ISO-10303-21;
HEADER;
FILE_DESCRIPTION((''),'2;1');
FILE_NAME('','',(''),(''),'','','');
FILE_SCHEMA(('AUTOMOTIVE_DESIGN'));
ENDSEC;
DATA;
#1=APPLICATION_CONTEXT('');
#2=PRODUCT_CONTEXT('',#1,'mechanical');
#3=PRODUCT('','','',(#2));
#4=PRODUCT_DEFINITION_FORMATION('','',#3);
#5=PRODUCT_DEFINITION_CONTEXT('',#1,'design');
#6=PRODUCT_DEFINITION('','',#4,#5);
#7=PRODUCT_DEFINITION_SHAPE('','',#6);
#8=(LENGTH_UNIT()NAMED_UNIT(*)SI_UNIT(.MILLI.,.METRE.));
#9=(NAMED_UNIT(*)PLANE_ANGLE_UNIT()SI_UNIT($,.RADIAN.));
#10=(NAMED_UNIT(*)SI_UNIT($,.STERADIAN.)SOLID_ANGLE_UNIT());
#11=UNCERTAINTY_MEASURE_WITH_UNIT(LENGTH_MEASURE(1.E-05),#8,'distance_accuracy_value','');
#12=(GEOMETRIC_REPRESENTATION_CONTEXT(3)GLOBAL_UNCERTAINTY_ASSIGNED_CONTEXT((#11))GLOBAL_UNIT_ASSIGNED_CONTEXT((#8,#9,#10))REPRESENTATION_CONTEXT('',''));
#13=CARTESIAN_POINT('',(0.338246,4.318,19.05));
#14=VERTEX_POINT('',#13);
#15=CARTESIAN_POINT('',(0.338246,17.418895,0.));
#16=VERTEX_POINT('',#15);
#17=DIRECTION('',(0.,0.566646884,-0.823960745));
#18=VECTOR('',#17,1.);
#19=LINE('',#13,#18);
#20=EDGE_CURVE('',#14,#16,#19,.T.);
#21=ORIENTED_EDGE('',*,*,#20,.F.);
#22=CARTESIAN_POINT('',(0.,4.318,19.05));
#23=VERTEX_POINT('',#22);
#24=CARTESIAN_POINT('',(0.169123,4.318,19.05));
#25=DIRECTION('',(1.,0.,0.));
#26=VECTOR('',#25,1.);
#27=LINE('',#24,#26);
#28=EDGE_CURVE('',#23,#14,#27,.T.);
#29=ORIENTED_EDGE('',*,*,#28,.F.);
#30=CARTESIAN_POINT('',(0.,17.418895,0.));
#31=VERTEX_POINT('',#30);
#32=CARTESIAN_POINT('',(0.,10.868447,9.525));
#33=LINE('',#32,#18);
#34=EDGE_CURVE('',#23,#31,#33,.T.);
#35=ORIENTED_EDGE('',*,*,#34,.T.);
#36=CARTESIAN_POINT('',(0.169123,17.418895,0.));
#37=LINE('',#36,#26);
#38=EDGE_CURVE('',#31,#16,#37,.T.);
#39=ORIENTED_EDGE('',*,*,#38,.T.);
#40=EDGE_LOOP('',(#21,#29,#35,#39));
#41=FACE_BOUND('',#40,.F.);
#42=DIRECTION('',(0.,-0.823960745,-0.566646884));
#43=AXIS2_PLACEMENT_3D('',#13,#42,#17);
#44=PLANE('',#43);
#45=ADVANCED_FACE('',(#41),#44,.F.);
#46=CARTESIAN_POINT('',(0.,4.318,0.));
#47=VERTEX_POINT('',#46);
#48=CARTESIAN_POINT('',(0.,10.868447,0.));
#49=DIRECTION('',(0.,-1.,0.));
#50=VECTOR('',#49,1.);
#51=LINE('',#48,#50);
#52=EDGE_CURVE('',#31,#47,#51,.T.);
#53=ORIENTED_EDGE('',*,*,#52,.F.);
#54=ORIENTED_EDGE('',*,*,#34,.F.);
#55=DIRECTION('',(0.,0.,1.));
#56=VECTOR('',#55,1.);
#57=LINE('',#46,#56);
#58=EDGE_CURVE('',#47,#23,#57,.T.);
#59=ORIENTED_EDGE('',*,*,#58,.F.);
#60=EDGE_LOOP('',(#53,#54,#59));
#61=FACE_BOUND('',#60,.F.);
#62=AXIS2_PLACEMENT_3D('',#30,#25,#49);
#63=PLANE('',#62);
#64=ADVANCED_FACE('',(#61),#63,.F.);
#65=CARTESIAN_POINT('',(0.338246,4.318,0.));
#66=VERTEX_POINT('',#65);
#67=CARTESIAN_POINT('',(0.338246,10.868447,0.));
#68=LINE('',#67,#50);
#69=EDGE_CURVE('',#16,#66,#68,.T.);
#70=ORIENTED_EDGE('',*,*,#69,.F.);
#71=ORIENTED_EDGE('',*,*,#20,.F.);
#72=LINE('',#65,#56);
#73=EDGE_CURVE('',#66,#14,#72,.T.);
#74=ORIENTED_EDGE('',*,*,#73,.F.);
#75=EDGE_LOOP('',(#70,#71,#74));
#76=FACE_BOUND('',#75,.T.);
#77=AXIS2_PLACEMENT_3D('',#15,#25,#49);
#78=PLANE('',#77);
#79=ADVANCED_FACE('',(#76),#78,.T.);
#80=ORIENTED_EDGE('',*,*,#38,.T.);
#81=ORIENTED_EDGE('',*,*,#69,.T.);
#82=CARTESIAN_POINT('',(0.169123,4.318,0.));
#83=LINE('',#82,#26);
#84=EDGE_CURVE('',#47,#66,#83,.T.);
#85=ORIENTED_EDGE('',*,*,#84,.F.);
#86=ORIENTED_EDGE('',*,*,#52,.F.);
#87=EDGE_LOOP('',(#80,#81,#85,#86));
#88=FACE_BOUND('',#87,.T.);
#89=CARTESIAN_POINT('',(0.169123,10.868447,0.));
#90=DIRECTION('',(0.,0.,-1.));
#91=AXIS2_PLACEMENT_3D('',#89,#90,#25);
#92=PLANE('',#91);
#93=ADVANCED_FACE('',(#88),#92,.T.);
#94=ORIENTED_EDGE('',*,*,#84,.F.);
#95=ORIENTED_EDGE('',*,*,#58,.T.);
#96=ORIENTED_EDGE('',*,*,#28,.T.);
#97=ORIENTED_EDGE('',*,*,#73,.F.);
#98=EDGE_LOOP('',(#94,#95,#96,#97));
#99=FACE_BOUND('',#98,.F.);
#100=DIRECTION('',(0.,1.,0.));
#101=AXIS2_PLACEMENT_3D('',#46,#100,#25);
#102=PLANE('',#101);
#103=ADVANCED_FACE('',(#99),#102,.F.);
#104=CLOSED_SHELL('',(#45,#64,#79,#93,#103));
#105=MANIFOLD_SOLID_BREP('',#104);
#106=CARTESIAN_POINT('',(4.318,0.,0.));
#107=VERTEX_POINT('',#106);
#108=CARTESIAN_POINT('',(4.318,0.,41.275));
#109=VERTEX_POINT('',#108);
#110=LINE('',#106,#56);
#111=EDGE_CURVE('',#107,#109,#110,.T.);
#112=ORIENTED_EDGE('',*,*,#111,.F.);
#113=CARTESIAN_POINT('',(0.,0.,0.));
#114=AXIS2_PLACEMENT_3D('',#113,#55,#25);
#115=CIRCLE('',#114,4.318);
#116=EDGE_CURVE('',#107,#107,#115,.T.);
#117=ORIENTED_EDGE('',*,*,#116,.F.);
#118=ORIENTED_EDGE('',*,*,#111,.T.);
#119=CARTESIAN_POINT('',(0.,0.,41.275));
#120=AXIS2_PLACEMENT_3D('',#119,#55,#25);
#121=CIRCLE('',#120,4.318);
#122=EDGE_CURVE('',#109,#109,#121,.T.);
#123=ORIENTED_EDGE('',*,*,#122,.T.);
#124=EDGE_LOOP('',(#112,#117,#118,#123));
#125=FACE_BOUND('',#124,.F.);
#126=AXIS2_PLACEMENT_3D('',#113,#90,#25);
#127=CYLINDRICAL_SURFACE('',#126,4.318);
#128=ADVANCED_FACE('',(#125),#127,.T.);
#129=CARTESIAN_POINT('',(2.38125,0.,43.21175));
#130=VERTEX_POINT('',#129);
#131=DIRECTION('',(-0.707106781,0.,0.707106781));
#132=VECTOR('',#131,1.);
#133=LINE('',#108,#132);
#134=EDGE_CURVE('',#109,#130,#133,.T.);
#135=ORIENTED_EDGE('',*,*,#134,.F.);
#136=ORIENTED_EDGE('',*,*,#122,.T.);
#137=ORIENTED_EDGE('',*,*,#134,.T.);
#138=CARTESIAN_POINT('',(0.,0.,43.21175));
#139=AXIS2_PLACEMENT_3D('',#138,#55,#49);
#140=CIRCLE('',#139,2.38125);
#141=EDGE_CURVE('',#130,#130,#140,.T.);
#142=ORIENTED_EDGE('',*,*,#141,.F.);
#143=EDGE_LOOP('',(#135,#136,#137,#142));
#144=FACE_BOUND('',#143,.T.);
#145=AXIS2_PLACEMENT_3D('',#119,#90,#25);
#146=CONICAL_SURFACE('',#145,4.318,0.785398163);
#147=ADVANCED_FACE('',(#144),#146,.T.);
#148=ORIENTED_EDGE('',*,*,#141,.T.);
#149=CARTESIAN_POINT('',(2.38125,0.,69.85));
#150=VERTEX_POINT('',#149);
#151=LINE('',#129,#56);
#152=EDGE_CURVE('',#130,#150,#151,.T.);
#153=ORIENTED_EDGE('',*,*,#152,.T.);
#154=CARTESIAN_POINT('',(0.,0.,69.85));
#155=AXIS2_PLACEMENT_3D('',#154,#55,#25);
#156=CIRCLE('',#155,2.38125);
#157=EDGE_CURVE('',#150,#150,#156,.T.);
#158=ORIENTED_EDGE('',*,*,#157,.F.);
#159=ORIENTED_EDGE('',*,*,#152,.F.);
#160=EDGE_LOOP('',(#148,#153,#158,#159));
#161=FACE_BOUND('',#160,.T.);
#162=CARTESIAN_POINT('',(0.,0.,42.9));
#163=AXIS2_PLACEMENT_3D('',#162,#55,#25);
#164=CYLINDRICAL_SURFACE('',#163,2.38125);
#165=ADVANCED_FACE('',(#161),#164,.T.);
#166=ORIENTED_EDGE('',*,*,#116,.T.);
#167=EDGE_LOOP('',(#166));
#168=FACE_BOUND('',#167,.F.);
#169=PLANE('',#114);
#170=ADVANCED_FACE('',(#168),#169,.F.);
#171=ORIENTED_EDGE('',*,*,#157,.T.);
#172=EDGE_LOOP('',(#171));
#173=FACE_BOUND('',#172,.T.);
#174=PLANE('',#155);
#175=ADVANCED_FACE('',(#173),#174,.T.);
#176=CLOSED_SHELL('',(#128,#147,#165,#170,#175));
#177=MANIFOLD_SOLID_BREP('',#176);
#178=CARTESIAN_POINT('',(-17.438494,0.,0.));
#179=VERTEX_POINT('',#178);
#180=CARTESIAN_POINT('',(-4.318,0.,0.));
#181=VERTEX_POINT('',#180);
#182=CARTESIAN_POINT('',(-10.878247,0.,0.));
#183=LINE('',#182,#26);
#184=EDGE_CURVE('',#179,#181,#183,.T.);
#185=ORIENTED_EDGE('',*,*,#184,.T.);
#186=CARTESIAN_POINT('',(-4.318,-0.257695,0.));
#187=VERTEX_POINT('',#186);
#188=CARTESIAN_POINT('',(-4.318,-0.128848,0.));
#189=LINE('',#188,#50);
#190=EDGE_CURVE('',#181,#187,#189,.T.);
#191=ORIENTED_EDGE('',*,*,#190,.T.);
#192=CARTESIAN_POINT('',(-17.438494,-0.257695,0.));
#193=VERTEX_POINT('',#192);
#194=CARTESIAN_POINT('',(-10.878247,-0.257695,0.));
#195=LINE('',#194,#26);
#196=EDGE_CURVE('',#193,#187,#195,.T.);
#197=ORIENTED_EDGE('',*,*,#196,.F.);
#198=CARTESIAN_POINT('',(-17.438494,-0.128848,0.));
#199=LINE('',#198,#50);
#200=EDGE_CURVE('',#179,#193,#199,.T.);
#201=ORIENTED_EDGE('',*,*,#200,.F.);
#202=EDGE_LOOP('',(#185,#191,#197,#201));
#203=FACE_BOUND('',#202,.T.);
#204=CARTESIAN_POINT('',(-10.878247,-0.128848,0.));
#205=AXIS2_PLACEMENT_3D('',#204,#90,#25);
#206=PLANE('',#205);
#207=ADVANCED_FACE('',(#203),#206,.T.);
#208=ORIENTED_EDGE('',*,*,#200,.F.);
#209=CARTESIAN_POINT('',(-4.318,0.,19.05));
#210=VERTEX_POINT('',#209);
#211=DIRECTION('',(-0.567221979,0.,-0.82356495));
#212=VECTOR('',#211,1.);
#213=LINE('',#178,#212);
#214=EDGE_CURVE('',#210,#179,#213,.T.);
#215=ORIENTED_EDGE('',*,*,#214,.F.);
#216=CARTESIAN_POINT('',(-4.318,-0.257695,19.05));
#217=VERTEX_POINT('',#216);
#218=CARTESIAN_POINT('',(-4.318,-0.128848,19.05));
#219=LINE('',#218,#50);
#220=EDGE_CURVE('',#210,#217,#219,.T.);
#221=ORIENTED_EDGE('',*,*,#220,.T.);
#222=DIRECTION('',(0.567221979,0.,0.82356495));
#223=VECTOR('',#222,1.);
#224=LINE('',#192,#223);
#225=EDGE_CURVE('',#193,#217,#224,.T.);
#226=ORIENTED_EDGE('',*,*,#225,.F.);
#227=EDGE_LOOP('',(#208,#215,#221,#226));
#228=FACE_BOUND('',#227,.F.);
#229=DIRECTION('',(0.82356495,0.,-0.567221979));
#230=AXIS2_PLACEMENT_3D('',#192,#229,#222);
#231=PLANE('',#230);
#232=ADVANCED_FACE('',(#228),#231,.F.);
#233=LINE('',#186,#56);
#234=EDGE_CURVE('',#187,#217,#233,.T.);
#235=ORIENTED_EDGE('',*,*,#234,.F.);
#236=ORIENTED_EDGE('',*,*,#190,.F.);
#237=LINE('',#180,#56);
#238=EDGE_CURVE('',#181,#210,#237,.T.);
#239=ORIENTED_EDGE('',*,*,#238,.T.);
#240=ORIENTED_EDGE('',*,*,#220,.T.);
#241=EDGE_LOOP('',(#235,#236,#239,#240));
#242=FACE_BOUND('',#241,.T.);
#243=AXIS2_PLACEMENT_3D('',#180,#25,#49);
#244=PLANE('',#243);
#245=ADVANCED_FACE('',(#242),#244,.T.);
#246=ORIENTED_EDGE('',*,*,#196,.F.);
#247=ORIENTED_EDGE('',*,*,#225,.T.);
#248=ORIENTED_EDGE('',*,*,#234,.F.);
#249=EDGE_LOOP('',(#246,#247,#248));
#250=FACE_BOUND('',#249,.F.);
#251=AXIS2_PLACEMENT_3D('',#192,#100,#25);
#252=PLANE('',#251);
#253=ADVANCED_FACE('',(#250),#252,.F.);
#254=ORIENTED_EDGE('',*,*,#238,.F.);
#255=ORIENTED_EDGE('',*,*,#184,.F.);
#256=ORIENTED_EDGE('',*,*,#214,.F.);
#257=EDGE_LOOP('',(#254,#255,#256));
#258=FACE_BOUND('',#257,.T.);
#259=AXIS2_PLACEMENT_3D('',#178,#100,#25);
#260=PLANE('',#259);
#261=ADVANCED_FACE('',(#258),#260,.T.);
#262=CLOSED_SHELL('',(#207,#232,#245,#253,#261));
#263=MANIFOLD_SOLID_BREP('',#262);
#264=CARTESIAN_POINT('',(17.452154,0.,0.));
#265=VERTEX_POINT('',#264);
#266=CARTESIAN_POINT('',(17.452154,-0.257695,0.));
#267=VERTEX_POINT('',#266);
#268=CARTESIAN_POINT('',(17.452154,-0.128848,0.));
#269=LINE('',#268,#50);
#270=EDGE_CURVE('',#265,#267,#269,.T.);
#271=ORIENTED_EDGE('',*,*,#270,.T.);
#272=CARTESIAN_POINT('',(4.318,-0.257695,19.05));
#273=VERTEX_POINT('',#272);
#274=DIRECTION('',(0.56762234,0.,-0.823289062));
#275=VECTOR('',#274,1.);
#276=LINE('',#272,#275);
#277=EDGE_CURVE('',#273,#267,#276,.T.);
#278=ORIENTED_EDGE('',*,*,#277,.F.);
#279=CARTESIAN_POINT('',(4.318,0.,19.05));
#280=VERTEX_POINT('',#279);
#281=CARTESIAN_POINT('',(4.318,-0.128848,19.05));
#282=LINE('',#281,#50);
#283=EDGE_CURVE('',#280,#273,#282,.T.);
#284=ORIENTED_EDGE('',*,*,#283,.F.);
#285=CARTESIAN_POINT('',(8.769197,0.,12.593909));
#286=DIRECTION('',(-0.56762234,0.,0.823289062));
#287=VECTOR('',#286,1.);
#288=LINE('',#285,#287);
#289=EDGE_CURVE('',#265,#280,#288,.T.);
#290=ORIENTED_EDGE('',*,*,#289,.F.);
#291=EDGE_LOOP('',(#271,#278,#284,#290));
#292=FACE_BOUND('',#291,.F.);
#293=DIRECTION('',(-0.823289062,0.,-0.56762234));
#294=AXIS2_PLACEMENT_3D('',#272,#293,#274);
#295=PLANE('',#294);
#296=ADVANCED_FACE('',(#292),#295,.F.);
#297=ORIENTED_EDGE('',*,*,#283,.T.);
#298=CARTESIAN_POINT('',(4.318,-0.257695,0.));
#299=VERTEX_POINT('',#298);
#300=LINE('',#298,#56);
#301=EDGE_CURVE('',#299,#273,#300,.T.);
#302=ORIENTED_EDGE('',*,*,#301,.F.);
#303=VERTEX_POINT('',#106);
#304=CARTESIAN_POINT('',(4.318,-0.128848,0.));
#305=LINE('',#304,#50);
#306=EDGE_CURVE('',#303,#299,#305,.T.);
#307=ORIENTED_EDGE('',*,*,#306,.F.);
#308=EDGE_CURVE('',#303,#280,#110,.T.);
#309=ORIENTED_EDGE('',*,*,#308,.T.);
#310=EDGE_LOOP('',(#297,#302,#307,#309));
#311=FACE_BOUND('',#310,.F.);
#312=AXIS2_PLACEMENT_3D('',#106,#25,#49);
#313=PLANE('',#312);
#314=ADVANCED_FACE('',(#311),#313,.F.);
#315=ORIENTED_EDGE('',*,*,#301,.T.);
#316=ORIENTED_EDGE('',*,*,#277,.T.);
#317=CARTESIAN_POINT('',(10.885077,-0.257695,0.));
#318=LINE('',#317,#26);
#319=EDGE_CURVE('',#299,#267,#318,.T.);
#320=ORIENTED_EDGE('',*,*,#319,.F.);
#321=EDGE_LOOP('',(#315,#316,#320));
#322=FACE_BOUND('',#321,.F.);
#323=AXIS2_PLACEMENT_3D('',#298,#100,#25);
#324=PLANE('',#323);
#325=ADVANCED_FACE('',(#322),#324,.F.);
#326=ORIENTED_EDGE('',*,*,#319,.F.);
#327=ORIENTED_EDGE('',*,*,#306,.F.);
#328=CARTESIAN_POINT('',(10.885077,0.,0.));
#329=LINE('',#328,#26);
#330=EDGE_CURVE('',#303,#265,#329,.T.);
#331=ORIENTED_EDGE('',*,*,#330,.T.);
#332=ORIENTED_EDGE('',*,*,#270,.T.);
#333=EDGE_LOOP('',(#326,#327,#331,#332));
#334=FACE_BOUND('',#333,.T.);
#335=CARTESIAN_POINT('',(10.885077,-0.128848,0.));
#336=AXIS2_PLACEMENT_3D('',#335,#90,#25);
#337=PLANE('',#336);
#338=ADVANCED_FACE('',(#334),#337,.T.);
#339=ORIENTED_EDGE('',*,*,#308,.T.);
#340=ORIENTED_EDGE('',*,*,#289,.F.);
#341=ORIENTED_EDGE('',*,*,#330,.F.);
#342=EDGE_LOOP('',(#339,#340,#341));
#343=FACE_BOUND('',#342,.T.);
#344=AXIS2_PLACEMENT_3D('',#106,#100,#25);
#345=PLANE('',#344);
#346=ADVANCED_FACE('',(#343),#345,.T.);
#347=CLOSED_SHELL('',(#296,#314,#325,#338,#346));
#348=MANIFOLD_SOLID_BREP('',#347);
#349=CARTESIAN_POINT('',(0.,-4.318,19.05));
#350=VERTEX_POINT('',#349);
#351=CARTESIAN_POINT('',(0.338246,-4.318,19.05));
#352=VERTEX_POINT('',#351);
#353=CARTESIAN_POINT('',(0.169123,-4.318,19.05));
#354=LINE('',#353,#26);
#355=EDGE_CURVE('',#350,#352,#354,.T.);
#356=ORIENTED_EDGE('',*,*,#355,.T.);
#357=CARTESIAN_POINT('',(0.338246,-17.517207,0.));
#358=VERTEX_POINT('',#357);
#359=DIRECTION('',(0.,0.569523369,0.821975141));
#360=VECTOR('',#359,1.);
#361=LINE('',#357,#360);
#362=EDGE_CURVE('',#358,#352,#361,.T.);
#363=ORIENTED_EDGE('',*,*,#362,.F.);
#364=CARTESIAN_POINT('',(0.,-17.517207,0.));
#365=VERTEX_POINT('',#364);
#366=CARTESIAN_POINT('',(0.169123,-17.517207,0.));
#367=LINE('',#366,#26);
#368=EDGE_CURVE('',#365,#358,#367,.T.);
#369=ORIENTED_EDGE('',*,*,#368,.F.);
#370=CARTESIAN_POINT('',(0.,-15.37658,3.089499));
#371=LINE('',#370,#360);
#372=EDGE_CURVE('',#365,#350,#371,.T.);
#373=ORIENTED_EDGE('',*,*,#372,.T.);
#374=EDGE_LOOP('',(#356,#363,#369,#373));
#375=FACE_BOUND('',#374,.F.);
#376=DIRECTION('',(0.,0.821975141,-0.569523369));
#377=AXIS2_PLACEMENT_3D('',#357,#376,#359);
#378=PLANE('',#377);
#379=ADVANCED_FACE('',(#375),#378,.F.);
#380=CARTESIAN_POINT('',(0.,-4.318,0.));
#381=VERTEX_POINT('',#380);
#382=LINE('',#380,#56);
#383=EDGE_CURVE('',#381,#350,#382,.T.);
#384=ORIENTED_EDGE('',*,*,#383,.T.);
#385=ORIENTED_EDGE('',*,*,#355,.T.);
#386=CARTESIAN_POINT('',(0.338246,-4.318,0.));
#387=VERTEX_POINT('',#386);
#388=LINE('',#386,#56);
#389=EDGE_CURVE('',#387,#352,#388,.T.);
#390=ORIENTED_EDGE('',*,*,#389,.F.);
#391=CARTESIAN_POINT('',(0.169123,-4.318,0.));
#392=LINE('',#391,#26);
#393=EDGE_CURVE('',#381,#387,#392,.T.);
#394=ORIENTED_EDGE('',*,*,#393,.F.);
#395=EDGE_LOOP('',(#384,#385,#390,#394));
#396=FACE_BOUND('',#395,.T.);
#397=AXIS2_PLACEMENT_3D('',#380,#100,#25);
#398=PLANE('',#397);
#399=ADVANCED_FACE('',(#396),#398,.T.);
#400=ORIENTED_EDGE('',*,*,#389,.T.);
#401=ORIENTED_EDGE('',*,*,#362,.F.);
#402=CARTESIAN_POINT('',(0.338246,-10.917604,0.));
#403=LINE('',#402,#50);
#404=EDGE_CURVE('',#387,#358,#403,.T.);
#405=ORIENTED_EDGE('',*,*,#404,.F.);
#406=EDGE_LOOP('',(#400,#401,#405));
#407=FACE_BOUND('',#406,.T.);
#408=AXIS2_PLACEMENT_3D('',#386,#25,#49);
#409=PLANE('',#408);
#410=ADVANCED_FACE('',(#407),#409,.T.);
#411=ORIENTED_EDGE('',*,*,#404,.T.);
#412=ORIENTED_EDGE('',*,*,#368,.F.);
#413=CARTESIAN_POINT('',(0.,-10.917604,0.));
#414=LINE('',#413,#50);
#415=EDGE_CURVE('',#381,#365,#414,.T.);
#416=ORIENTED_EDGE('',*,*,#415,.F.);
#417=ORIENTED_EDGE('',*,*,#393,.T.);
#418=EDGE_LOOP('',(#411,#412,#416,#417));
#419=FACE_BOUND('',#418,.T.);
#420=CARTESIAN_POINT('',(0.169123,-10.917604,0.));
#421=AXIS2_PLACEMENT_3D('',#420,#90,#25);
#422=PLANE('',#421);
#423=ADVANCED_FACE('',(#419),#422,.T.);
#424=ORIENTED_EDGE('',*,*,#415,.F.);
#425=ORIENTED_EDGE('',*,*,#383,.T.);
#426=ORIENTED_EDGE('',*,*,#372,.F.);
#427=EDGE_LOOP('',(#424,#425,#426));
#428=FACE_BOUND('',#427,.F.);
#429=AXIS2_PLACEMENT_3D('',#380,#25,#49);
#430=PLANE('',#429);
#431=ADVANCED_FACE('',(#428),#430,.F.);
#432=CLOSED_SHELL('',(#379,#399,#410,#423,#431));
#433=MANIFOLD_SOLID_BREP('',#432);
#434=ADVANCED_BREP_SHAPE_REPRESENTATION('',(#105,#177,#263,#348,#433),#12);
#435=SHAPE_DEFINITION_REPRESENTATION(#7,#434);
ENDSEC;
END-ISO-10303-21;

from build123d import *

# Parameters (mm, degrees)
F0_R        = 4.318
F1_DEPTH    = 44.45
F2_R        = 2.38125
F3_DEPTH    = 25.4
F4_S5_R     = 2.38125
F4_T6_DEPTH = 8
F5_W        = 0.3382458817
F5_H        = 13.1992071904
F6_DEPTH    = 19.05
F5_W_2      = 13.1341543086
F5_H_2      = 0.257695443
F5_H_3      = 13.1008949168
F5_W_3      = 13.120493669
F8_DEPTH    = 25.4
F10_DEPTH   = 25.4
F12_DEPTH   = 25.4
F14_DEPTH   = 25.4


# Not quite as in the source:
# - a fillet or chamfer that OpenCascade refuses, or shapes differently, is made with other operations: its cross-section is extruded or revolved along the edge and cut away or added


with BuildPart() as f1:
    # F0 (on Top) → F1 (new body)
    with BuildSketch(Plane.XY):
        Circle(F0_R)
    extrude(amount=F1_DEPTH)

    # F2 (on face) → F3 (join)
    with BuildSketch(Plane.XY.offset(44.45)):
        Circle(F2_R)
    extrude(amount=F3_DEPTH)

    # F4: chamfer of 3.175 on 1 edges, made by hand


with BuildPart() as f4_tool2:
    # F4_s3 → F4_t4 (revolve)
    with BuildSketch(Plane.XZ):
        Polygon((4.318, 41.275), (1.143, 44.45), (4.318, 44.45), align=None)
    revolve(axis=Axis((0, 0, 44.45), (0, 0, 1)))

    # F4_s5 → F4_t6 (cut, symmetric)
    with BuildSketch(Plane.XY.offset(42.9)):
        Circle(F4_S5_R)
    extrude(amount=F4_T6_DEPTH, both=True, mode=Mode.SUBTRACT)


with BuildPart() as f1_1:
    add(f1.part)

    # F4_t1: cut F4_tool2
    add(f4_tool2.part, mode=Mode.SUBTRACT)


with BuildPart() as f6:
    # F5 (on face) → F6 (new body)
    with BuildSketch(Plane(origin=(0, 0, 0), x_dir=(1, 0, 0), z_dir=(0, 0, -1))):
        with Locations((0.1691229409, 10.9176035952)):
            Rectangle(F5_W, F5_H)
    extrude(amount=-F6_DEPTH)

    # F7 (on face) → F8 (cut)
    with BuildSketch(Plane.YZ.offset(0.3382458817)):
        Polygon((-17.5172071904, 0), (-4.318, 19.05), (-17.5172071904, 19.05), align=None)
    extrude(amount=-F8_DEPTH, mode=Mode.SUBTRACT)


with BuildPart() as f6b:
    # F5 (on face) → F6, piece 2 (new body)
    with BuildSketch(Plane(origin=(0, 0, 0), x_dir=(1, 0, 0), z_dir=(0, 0, -1))):
        with Locations((10.8850771543, 0.1288477215)):
            Rectangle(F5_W_2, F5_H_2)
    extrude(amount=-F6_DEPTH)

    # F11 (on face) → F12 (cut)
    with BuildSketch(Plane.XZ.offset(0.257695443)):
        Polygon((17.4521543086, 19.05), (4.318, 19.05), (17.4521543086, 0), align=None)
    extrude(amount=-F12_DEPTH, mode=Mode.SUBTRACT)


with BuildPart() as f6c:
    # F5 (on face) → F6, piece 3 (new body)
    with BuildSketch(Plane(origin=(0, 0, 0), x_dir=(1, 0, 0), z_dir=(0, 0, -1))):
        with Locations((0.1691229409, -10.8684474584)):
            Rectangle(F5_W, F5_H_3)
    extrude(amount=-F6_DEPTH)

    # F9 (on face) → F10 (cut)
    with BuildSketch(Plane.YZ.offset(0.3382458817)):
        Polygon((17.4188949168, 19.05), (4.318, 19.05), (17.4188949168, 0), align=None)
    extrude(amount=-F10_DEPTH, mode=Mode.SUBTRACT)


with BuildPart() as f6d:
    # F5 (on face) → F6, piece 4 (new body)
    with BuildSketch(Plane(origin=(0, 0, 0), x_dir=(1, 0, 0), z_dir=(0, 0, -1))):
        with Locations((-10.8782468345, 0.1288477215)):
            Rectangle(F5_W_3, F5_H_2)
    extrude(amount=-F6_DEPTH)

    # F13 (on face) → F14 (cut)
    with BuildSketch(Plane.XZ.offset(0.257695443)):
        Polygon((-17.438493669, 0), (-4.318, 19.05), (-17.438493669, 19.05), align=None)
    extrude(amount=-F14_DEPTH, mode=Mode.SUBTRACT)


solid = Compound([f1_1.part, f6.part, f6b.part, f6c.part, f6d.part])
